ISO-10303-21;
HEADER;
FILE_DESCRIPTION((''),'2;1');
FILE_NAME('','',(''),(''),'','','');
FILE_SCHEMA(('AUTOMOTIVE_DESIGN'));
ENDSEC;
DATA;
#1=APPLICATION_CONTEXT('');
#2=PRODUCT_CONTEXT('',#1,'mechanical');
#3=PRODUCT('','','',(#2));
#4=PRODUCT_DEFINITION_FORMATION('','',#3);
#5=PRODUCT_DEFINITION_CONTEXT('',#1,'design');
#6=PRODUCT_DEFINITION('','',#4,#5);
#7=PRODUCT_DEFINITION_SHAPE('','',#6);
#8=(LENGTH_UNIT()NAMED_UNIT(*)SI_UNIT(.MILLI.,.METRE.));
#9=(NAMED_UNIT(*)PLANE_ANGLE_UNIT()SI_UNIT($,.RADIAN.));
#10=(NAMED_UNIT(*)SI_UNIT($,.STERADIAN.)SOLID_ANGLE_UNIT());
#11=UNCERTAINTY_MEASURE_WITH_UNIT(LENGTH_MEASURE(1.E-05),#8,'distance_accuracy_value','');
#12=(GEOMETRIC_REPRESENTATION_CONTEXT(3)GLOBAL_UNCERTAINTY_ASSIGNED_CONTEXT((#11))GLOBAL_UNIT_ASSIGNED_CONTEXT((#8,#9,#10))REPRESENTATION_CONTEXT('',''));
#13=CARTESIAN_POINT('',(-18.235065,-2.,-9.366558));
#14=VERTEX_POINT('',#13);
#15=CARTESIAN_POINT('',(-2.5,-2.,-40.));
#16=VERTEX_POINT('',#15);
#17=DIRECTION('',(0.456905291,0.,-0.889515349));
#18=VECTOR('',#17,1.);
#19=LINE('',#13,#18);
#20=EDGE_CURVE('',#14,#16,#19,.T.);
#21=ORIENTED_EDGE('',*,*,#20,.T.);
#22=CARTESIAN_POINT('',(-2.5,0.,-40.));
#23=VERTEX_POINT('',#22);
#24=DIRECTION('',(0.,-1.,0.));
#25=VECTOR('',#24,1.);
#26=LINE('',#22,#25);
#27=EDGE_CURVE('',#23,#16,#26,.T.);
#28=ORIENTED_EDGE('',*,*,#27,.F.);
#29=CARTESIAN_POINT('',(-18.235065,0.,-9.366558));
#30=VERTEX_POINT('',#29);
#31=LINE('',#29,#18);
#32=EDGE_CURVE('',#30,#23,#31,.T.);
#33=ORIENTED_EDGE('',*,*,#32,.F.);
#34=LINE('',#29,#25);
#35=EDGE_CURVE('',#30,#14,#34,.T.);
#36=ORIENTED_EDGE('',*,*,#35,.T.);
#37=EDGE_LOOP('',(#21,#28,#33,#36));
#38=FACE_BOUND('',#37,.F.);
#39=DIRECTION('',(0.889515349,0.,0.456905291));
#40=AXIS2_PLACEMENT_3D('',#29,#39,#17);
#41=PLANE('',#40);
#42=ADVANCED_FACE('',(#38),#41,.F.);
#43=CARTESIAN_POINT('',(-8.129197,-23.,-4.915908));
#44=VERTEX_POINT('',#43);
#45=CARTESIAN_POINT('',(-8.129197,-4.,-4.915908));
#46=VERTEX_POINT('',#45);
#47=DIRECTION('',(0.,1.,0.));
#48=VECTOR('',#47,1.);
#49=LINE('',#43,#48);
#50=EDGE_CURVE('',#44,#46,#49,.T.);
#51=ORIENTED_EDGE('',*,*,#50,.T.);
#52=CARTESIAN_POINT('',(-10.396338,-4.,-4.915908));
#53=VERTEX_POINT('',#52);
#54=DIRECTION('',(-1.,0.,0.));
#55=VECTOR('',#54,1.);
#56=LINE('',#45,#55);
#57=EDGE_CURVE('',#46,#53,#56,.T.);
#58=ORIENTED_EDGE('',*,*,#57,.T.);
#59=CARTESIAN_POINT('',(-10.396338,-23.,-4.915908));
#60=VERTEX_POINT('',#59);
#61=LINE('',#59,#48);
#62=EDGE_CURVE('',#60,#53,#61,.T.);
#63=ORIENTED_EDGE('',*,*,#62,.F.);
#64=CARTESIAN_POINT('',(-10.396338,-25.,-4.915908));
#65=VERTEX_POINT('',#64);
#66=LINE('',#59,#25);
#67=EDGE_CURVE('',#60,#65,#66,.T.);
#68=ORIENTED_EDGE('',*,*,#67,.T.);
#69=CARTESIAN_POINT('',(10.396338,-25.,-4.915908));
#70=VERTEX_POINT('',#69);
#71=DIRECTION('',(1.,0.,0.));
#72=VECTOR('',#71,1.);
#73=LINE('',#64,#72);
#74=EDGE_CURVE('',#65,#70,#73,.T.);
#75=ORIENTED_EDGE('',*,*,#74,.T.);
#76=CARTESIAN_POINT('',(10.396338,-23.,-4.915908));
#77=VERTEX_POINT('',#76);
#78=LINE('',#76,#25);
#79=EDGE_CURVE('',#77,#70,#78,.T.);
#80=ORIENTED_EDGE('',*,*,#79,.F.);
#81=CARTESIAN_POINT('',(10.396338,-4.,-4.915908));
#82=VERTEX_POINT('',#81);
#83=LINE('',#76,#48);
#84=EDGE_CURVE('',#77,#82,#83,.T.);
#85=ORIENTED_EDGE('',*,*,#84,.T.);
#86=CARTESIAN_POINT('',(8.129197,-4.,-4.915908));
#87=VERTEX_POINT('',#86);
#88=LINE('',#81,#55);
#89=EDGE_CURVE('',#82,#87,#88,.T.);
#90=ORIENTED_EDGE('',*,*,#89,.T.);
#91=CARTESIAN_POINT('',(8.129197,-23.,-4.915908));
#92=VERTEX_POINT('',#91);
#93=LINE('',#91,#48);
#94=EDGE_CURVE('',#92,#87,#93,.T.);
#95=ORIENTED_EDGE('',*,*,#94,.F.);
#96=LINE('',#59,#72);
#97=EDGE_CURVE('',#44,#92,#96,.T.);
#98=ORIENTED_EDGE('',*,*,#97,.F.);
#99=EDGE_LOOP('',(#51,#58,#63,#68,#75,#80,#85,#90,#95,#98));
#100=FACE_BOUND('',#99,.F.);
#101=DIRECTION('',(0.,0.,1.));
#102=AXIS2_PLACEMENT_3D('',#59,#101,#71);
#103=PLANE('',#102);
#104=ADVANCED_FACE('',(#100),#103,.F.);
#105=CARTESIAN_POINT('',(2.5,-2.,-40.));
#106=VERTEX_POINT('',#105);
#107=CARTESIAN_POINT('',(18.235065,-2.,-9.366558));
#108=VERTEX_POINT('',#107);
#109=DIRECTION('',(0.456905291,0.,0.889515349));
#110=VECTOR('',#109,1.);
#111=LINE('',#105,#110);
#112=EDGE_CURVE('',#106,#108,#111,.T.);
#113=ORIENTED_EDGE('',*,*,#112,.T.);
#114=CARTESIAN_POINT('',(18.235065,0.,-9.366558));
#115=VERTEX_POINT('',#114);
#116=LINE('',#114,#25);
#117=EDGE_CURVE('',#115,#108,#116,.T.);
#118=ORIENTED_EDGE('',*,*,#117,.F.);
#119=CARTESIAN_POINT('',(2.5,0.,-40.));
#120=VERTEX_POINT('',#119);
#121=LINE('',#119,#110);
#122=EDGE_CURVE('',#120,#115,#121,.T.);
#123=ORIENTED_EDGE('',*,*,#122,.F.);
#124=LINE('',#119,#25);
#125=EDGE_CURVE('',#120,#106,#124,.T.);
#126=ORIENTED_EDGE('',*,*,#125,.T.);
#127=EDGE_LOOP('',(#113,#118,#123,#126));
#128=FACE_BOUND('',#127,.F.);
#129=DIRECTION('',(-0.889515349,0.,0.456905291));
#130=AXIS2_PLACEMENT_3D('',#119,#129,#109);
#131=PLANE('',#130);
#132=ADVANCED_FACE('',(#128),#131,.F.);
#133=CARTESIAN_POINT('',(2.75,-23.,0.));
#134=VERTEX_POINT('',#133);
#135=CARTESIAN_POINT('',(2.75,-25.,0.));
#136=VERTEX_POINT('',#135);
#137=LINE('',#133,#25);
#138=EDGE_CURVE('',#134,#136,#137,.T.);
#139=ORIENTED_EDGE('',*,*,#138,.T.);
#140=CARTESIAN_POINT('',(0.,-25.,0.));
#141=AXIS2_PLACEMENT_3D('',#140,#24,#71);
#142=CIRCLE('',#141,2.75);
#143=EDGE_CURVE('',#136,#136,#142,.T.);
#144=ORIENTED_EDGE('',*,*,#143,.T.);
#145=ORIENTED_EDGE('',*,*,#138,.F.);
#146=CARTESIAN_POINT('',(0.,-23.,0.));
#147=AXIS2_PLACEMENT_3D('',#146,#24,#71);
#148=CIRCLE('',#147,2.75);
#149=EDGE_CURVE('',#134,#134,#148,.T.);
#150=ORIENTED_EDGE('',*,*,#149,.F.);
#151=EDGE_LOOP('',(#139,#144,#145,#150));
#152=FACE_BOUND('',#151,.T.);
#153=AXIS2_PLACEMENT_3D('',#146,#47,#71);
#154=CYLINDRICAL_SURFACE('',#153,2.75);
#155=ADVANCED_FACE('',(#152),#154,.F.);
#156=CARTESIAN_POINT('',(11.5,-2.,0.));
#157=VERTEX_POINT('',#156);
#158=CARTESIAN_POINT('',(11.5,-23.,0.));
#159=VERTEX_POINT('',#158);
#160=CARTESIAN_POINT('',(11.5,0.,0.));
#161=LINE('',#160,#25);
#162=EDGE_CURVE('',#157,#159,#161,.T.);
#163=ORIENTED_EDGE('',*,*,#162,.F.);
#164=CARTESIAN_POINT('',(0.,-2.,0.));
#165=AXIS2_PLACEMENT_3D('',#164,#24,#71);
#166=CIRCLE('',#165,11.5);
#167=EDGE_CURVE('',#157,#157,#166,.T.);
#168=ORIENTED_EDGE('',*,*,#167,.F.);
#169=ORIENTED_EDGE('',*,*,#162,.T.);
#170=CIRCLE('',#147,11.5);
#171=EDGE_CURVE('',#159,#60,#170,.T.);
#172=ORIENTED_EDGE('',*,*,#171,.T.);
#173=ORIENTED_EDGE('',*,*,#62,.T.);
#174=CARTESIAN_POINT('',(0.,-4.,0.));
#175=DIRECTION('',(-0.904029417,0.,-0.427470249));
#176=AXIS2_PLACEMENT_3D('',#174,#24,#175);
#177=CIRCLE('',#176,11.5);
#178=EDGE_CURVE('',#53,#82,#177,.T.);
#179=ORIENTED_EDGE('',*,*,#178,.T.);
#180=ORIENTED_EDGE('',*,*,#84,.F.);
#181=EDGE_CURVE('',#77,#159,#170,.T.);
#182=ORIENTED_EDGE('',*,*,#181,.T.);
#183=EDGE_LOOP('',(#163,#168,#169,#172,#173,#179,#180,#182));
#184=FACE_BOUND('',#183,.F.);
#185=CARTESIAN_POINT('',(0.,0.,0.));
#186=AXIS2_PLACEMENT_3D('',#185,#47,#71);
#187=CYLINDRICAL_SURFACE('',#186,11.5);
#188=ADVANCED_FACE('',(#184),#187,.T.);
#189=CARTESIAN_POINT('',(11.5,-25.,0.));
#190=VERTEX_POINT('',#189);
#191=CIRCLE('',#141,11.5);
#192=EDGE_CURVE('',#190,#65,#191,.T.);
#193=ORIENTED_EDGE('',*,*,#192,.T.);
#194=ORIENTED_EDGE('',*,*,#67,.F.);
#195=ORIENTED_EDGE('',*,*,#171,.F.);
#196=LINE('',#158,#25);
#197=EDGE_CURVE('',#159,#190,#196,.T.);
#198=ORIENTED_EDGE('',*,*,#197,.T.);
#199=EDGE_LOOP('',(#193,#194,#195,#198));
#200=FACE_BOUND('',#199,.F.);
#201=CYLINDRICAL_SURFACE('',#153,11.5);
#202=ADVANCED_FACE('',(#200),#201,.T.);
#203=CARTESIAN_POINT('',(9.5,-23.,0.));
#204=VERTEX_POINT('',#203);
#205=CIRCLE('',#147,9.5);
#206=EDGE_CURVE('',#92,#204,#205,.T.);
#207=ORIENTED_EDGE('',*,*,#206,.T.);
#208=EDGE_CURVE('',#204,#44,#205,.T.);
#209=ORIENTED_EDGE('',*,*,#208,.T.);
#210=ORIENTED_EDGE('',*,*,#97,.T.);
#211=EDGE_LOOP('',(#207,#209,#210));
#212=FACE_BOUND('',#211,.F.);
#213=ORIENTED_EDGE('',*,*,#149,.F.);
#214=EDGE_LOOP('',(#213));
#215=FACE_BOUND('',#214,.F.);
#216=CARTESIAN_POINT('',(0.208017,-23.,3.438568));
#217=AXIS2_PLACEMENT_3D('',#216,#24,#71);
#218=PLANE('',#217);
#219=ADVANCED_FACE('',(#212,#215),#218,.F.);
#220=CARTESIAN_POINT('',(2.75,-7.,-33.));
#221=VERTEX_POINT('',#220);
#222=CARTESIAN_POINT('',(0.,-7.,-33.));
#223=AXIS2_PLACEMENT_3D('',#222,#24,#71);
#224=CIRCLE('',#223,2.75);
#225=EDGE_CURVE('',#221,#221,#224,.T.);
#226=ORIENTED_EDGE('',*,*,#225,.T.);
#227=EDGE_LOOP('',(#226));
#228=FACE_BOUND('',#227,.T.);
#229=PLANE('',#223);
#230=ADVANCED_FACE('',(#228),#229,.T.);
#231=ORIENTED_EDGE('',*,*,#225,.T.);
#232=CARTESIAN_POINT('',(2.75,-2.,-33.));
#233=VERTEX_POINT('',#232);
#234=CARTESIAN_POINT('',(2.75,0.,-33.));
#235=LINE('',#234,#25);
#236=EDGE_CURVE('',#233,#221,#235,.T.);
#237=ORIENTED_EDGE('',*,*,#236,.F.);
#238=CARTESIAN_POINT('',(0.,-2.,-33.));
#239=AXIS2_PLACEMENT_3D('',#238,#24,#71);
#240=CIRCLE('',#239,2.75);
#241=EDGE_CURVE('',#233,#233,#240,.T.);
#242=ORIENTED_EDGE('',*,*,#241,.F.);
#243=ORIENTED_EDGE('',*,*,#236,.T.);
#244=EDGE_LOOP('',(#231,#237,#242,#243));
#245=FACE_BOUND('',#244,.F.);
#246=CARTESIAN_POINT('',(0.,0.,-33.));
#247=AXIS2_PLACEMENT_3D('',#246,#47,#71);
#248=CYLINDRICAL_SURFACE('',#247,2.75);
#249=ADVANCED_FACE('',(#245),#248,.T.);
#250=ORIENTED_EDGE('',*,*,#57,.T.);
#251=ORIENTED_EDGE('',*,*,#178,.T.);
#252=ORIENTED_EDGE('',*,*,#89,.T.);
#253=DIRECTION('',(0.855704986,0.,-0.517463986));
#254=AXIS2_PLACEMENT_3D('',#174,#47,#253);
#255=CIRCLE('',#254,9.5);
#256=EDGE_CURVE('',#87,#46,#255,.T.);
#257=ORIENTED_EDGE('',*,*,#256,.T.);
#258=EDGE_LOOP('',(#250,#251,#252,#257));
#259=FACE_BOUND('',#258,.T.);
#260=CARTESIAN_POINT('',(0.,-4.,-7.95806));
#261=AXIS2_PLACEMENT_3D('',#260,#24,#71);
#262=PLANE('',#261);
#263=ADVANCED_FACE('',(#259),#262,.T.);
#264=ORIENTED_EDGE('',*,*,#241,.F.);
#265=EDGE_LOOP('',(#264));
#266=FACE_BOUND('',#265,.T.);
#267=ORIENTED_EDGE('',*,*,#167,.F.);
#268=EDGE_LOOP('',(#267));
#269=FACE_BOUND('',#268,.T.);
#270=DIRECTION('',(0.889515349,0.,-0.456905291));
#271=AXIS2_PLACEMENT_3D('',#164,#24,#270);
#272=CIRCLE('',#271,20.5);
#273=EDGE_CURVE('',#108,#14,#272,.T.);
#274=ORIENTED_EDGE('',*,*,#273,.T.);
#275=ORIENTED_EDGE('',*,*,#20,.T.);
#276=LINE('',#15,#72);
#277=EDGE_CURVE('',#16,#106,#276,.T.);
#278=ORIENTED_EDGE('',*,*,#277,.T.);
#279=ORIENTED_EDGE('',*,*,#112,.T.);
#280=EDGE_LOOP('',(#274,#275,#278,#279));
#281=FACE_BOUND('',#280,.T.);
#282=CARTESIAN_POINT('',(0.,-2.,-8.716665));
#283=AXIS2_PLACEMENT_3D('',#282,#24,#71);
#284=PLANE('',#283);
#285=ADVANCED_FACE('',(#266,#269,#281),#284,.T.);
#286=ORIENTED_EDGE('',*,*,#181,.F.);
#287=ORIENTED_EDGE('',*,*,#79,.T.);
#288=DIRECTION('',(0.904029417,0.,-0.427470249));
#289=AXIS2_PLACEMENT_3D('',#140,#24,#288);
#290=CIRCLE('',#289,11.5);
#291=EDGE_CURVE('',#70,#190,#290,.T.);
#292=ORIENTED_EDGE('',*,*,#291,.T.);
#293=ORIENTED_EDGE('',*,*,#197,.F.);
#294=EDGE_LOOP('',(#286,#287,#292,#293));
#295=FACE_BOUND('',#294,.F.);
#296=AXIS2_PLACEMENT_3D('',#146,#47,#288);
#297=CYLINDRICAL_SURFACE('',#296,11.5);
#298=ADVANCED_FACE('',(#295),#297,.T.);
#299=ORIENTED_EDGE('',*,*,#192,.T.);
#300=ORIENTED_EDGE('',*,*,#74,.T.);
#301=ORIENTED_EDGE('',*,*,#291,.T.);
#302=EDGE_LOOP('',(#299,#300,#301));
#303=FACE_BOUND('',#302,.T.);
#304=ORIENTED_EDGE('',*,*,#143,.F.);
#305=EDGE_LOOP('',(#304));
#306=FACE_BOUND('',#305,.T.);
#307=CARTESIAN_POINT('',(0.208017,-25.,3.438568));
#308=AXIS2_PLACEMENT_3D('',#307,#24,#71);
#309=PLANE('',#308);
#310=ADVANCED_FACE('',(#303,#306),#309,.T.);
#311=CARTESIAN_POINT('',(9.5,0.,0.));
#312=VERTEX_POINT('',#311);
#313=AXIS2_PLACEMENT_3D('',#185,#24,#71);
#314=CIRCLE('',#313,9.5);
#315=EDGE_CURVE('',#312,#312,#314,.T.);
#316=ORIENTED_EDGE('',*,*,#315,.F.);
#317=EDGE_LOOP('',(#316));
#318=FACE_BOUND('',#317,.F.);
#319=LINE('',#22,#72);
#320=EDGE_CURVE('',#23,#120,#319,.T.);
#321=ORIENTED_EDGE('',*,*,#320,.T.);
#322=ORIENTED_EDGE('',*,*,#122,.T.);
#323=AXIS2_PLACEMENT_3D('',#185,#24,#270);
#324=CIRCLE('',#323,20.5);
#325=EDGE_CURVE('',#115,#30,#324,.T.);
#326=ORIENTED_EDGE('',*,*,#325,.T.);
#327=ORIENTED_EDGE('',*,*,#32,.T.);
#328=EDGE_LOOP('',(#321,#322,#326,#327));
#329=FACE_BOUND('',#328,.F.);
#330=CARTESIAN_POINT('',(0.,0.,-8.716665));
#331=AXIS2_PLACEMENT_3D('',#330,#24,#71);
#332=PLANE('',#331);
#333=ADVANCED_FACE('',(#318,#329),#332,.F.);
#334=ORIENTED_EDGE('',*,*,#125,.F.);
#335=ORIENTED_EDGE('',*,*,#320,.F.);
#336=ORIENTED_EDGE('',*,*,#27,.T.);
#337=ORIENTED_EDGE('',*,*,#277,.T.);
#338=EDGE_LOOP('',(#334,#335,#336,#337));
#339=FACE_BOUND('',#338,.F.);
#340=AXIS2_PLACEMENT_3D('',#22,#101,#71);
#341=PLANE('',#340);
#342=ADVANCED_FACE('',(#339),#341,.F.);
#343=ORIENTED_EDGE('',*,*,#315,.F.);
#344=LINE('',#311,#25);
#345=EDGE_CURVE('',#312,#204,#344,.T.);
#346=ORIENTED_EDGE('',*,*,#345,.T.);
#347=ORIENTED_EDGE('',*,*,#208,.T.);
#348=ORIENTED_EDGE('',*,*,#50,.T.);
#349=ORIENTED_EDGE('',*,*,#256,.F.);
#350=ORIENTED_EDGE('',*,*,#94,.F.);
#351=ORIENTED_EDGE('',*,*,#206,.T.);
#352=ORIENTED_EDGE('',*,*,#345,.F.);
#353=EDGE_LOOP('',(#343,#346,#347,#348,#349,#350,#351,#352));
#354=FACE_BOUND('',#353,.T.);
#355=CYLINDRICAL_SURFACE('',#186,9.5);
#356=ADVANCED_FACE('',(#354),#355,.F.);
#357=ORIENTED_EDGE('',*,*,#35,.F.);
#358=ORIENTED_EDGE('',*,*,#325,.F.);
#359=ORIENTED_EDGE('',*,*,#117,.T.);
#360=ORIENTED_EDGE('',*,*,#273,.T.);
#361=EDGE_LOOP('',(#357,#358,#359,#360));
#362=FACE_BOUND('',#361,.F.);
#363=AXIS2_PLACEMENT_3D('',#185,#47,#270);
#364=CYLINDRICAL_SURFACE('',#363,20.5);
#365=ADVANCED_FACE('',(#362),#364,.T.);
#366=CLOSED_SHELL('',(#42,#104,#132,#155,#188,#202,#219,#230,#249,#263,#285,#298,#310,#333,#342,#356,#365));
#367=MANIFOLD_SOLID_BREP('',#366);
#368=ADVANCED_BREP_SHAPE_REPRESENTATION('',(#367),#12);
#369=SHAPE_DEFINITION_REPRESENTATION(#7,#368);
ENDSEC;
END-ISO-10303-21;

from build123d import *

# Parameters (mm, degrees)
F0_R      = 2.75
F0_R_2    = 11.5
F1_DEPTH  = 2
F3_DEPTH  = 29
F4_R      = 11.5
F4_R_2    = 2.75
F5_DEPTH  = 2
F0_R_3    = 9.5
F8_DEPTH  = 23
F9_DEPTH  = 7
F11_DEPTH = 19
F12_R     = 2.75
F13_DEPTH = 2


with BuildPart() as f1:
    # F0 (on Front) → F1 (new body)
    with BuildSketch(Plane.XZ):
        with BuildLine():
            Line((2.5, -40), (18.2350646454, -9.3665584597))
            ThreePointArc((18.2350646454, -9.3665584597), (0, 20.5), (-18.2350646454, -9.3665584597))
            Line((-18.2350646454, -9.3665584597), (-2.5, -40))
            Line((-2.5, -40), (2.5, -40))
        make_face()
        with Locations((0, -33)):
            Circle(F0_R, mode=Mode.SUBTRACT)
        Circle(F0_R_2, mode=Mode.SUBTRACT)
    extrude(amount=F1_DEPTH)

    # F0 (on Front) → F8 (join)
    with BuildSketch(Plane.XZ):
        Circle(F0_R_2)
        Circle(F0_R_3, mode=Mode.SUBTRACT)
    extrude(amount=F8_DEPTH)

    # F0 (on Front) → F9 (join)
    with BuildSketch(Plane.XZ):
        with Locations((0, -33)):
            Circle(F0_R)
    extrude(amount=F9_DEPTH)

    # F10 (on face) → F11 (cut)
    with BuildSketch(Plane.XZ.offset(23)):
        with BuildLine():
            Line((-8.129197368, -4.9159078665), (-10.3963382904, -4.9159078665))
            ThreePointArc((-10.3963382904, -4.9159078665), (0, -11.5), (10.3963382904, -4.9159078665))
            Line((10.3963382904, -4.9159078665), (8.129197368, -4.9159078665))
            ThreePointArc((8.129197368, -4.9159078665), (0, -9.5), (-8.129197368, -4.9159078665))
        make_face()
    extrude(amount=-F11_DEPTH, mode=Mode.SUBTRACT)

    # F12 (on face) → F13 (join)
    with BuildSketch(Plane.XZ.offset(23)):
        with BuildLine():
            Line((8.129197368, -4.9159078665), (10.3963382904, -4.9159078665))
            ThreePointArc((10.3963382904, -4.9159078665), (11.2206927224, -2.5191377156), (11.5, 0))
            ThreePointArc((11.5, 0), (-2.5191377156, 11.2206927224), (-10.3963382904, -4.9159078665))
            Line((-10.3963382904, -4.9159078665), (-8.129197368, -4.9159078665))
            ThreePointArc((-8.129197368, -4.9159078665), (-2.5517273565, 9.15088452), (9.5, 0))
            ThreePointArc((9.5, 0), (9.15088452, -2.5517273565), (8.129197368, -4.9159078665))
        make_face()
        with BuildLine():
            Line((-8.129197368, -4.9159078665), (8.129197368, -4.9159078665))
            ThreePointArc((8.129197368, -4.9159078665), (9.15088452, -2.5517273565), (9.5, 0))
            ThreePointArc((9.5, 0), (-2.5517273565, 9.15088452), (-8.129197368, -4.9159078665))
        make_face()
        Circle(F12_R, mode=Mode.SUBTRACT)
    extrude(amount=F13_DEPTH)


with BuildPart() as f3:
    # F2 (on face) → F3 (new body)
    with BuildSketch(Plane(origin=(0, 0, 0), x_dir=(-1, 0, 0), z_dir=(0, 1, 0))):
        with BuildLine():
            ThreePointArc((0, 11.5), (-8.1317279836, 8.1317279836), (-11.5, 0))
            ThreePointArc((-11.5, 0), (-11.2103927734, -2.5645845405), (-10.3561575886, -5))
            Line((-10.3561575886, -5), (-8.6602540378, -5))
            ThreePointArc((-8.6602540378, -5), (0, 10), (8.6602540378, -5))
            Line((8.6602540378, -5), (10.3561575886, -5))
            ThreePointArc((10.3561575886, -5), (11.2103927734, -2.5645845405), (11.5, 0))
            ThreePointArc((11.5, 0), (8.1317279836, 8.1317279836), (0, 11.5))
        make_face()
    extrude(amount=F3_DEPTH)


with BuildPart() as f5:
    # F4 (on Front) → F5 (new body)
    with BuildSketch(Plane.XZ):
        Circle(F4_R)
        Circle(F4_R_2, mode=Mode.SUBTRACT)
    extrude(amount=F5_DEPTH)


solid = f1.part
